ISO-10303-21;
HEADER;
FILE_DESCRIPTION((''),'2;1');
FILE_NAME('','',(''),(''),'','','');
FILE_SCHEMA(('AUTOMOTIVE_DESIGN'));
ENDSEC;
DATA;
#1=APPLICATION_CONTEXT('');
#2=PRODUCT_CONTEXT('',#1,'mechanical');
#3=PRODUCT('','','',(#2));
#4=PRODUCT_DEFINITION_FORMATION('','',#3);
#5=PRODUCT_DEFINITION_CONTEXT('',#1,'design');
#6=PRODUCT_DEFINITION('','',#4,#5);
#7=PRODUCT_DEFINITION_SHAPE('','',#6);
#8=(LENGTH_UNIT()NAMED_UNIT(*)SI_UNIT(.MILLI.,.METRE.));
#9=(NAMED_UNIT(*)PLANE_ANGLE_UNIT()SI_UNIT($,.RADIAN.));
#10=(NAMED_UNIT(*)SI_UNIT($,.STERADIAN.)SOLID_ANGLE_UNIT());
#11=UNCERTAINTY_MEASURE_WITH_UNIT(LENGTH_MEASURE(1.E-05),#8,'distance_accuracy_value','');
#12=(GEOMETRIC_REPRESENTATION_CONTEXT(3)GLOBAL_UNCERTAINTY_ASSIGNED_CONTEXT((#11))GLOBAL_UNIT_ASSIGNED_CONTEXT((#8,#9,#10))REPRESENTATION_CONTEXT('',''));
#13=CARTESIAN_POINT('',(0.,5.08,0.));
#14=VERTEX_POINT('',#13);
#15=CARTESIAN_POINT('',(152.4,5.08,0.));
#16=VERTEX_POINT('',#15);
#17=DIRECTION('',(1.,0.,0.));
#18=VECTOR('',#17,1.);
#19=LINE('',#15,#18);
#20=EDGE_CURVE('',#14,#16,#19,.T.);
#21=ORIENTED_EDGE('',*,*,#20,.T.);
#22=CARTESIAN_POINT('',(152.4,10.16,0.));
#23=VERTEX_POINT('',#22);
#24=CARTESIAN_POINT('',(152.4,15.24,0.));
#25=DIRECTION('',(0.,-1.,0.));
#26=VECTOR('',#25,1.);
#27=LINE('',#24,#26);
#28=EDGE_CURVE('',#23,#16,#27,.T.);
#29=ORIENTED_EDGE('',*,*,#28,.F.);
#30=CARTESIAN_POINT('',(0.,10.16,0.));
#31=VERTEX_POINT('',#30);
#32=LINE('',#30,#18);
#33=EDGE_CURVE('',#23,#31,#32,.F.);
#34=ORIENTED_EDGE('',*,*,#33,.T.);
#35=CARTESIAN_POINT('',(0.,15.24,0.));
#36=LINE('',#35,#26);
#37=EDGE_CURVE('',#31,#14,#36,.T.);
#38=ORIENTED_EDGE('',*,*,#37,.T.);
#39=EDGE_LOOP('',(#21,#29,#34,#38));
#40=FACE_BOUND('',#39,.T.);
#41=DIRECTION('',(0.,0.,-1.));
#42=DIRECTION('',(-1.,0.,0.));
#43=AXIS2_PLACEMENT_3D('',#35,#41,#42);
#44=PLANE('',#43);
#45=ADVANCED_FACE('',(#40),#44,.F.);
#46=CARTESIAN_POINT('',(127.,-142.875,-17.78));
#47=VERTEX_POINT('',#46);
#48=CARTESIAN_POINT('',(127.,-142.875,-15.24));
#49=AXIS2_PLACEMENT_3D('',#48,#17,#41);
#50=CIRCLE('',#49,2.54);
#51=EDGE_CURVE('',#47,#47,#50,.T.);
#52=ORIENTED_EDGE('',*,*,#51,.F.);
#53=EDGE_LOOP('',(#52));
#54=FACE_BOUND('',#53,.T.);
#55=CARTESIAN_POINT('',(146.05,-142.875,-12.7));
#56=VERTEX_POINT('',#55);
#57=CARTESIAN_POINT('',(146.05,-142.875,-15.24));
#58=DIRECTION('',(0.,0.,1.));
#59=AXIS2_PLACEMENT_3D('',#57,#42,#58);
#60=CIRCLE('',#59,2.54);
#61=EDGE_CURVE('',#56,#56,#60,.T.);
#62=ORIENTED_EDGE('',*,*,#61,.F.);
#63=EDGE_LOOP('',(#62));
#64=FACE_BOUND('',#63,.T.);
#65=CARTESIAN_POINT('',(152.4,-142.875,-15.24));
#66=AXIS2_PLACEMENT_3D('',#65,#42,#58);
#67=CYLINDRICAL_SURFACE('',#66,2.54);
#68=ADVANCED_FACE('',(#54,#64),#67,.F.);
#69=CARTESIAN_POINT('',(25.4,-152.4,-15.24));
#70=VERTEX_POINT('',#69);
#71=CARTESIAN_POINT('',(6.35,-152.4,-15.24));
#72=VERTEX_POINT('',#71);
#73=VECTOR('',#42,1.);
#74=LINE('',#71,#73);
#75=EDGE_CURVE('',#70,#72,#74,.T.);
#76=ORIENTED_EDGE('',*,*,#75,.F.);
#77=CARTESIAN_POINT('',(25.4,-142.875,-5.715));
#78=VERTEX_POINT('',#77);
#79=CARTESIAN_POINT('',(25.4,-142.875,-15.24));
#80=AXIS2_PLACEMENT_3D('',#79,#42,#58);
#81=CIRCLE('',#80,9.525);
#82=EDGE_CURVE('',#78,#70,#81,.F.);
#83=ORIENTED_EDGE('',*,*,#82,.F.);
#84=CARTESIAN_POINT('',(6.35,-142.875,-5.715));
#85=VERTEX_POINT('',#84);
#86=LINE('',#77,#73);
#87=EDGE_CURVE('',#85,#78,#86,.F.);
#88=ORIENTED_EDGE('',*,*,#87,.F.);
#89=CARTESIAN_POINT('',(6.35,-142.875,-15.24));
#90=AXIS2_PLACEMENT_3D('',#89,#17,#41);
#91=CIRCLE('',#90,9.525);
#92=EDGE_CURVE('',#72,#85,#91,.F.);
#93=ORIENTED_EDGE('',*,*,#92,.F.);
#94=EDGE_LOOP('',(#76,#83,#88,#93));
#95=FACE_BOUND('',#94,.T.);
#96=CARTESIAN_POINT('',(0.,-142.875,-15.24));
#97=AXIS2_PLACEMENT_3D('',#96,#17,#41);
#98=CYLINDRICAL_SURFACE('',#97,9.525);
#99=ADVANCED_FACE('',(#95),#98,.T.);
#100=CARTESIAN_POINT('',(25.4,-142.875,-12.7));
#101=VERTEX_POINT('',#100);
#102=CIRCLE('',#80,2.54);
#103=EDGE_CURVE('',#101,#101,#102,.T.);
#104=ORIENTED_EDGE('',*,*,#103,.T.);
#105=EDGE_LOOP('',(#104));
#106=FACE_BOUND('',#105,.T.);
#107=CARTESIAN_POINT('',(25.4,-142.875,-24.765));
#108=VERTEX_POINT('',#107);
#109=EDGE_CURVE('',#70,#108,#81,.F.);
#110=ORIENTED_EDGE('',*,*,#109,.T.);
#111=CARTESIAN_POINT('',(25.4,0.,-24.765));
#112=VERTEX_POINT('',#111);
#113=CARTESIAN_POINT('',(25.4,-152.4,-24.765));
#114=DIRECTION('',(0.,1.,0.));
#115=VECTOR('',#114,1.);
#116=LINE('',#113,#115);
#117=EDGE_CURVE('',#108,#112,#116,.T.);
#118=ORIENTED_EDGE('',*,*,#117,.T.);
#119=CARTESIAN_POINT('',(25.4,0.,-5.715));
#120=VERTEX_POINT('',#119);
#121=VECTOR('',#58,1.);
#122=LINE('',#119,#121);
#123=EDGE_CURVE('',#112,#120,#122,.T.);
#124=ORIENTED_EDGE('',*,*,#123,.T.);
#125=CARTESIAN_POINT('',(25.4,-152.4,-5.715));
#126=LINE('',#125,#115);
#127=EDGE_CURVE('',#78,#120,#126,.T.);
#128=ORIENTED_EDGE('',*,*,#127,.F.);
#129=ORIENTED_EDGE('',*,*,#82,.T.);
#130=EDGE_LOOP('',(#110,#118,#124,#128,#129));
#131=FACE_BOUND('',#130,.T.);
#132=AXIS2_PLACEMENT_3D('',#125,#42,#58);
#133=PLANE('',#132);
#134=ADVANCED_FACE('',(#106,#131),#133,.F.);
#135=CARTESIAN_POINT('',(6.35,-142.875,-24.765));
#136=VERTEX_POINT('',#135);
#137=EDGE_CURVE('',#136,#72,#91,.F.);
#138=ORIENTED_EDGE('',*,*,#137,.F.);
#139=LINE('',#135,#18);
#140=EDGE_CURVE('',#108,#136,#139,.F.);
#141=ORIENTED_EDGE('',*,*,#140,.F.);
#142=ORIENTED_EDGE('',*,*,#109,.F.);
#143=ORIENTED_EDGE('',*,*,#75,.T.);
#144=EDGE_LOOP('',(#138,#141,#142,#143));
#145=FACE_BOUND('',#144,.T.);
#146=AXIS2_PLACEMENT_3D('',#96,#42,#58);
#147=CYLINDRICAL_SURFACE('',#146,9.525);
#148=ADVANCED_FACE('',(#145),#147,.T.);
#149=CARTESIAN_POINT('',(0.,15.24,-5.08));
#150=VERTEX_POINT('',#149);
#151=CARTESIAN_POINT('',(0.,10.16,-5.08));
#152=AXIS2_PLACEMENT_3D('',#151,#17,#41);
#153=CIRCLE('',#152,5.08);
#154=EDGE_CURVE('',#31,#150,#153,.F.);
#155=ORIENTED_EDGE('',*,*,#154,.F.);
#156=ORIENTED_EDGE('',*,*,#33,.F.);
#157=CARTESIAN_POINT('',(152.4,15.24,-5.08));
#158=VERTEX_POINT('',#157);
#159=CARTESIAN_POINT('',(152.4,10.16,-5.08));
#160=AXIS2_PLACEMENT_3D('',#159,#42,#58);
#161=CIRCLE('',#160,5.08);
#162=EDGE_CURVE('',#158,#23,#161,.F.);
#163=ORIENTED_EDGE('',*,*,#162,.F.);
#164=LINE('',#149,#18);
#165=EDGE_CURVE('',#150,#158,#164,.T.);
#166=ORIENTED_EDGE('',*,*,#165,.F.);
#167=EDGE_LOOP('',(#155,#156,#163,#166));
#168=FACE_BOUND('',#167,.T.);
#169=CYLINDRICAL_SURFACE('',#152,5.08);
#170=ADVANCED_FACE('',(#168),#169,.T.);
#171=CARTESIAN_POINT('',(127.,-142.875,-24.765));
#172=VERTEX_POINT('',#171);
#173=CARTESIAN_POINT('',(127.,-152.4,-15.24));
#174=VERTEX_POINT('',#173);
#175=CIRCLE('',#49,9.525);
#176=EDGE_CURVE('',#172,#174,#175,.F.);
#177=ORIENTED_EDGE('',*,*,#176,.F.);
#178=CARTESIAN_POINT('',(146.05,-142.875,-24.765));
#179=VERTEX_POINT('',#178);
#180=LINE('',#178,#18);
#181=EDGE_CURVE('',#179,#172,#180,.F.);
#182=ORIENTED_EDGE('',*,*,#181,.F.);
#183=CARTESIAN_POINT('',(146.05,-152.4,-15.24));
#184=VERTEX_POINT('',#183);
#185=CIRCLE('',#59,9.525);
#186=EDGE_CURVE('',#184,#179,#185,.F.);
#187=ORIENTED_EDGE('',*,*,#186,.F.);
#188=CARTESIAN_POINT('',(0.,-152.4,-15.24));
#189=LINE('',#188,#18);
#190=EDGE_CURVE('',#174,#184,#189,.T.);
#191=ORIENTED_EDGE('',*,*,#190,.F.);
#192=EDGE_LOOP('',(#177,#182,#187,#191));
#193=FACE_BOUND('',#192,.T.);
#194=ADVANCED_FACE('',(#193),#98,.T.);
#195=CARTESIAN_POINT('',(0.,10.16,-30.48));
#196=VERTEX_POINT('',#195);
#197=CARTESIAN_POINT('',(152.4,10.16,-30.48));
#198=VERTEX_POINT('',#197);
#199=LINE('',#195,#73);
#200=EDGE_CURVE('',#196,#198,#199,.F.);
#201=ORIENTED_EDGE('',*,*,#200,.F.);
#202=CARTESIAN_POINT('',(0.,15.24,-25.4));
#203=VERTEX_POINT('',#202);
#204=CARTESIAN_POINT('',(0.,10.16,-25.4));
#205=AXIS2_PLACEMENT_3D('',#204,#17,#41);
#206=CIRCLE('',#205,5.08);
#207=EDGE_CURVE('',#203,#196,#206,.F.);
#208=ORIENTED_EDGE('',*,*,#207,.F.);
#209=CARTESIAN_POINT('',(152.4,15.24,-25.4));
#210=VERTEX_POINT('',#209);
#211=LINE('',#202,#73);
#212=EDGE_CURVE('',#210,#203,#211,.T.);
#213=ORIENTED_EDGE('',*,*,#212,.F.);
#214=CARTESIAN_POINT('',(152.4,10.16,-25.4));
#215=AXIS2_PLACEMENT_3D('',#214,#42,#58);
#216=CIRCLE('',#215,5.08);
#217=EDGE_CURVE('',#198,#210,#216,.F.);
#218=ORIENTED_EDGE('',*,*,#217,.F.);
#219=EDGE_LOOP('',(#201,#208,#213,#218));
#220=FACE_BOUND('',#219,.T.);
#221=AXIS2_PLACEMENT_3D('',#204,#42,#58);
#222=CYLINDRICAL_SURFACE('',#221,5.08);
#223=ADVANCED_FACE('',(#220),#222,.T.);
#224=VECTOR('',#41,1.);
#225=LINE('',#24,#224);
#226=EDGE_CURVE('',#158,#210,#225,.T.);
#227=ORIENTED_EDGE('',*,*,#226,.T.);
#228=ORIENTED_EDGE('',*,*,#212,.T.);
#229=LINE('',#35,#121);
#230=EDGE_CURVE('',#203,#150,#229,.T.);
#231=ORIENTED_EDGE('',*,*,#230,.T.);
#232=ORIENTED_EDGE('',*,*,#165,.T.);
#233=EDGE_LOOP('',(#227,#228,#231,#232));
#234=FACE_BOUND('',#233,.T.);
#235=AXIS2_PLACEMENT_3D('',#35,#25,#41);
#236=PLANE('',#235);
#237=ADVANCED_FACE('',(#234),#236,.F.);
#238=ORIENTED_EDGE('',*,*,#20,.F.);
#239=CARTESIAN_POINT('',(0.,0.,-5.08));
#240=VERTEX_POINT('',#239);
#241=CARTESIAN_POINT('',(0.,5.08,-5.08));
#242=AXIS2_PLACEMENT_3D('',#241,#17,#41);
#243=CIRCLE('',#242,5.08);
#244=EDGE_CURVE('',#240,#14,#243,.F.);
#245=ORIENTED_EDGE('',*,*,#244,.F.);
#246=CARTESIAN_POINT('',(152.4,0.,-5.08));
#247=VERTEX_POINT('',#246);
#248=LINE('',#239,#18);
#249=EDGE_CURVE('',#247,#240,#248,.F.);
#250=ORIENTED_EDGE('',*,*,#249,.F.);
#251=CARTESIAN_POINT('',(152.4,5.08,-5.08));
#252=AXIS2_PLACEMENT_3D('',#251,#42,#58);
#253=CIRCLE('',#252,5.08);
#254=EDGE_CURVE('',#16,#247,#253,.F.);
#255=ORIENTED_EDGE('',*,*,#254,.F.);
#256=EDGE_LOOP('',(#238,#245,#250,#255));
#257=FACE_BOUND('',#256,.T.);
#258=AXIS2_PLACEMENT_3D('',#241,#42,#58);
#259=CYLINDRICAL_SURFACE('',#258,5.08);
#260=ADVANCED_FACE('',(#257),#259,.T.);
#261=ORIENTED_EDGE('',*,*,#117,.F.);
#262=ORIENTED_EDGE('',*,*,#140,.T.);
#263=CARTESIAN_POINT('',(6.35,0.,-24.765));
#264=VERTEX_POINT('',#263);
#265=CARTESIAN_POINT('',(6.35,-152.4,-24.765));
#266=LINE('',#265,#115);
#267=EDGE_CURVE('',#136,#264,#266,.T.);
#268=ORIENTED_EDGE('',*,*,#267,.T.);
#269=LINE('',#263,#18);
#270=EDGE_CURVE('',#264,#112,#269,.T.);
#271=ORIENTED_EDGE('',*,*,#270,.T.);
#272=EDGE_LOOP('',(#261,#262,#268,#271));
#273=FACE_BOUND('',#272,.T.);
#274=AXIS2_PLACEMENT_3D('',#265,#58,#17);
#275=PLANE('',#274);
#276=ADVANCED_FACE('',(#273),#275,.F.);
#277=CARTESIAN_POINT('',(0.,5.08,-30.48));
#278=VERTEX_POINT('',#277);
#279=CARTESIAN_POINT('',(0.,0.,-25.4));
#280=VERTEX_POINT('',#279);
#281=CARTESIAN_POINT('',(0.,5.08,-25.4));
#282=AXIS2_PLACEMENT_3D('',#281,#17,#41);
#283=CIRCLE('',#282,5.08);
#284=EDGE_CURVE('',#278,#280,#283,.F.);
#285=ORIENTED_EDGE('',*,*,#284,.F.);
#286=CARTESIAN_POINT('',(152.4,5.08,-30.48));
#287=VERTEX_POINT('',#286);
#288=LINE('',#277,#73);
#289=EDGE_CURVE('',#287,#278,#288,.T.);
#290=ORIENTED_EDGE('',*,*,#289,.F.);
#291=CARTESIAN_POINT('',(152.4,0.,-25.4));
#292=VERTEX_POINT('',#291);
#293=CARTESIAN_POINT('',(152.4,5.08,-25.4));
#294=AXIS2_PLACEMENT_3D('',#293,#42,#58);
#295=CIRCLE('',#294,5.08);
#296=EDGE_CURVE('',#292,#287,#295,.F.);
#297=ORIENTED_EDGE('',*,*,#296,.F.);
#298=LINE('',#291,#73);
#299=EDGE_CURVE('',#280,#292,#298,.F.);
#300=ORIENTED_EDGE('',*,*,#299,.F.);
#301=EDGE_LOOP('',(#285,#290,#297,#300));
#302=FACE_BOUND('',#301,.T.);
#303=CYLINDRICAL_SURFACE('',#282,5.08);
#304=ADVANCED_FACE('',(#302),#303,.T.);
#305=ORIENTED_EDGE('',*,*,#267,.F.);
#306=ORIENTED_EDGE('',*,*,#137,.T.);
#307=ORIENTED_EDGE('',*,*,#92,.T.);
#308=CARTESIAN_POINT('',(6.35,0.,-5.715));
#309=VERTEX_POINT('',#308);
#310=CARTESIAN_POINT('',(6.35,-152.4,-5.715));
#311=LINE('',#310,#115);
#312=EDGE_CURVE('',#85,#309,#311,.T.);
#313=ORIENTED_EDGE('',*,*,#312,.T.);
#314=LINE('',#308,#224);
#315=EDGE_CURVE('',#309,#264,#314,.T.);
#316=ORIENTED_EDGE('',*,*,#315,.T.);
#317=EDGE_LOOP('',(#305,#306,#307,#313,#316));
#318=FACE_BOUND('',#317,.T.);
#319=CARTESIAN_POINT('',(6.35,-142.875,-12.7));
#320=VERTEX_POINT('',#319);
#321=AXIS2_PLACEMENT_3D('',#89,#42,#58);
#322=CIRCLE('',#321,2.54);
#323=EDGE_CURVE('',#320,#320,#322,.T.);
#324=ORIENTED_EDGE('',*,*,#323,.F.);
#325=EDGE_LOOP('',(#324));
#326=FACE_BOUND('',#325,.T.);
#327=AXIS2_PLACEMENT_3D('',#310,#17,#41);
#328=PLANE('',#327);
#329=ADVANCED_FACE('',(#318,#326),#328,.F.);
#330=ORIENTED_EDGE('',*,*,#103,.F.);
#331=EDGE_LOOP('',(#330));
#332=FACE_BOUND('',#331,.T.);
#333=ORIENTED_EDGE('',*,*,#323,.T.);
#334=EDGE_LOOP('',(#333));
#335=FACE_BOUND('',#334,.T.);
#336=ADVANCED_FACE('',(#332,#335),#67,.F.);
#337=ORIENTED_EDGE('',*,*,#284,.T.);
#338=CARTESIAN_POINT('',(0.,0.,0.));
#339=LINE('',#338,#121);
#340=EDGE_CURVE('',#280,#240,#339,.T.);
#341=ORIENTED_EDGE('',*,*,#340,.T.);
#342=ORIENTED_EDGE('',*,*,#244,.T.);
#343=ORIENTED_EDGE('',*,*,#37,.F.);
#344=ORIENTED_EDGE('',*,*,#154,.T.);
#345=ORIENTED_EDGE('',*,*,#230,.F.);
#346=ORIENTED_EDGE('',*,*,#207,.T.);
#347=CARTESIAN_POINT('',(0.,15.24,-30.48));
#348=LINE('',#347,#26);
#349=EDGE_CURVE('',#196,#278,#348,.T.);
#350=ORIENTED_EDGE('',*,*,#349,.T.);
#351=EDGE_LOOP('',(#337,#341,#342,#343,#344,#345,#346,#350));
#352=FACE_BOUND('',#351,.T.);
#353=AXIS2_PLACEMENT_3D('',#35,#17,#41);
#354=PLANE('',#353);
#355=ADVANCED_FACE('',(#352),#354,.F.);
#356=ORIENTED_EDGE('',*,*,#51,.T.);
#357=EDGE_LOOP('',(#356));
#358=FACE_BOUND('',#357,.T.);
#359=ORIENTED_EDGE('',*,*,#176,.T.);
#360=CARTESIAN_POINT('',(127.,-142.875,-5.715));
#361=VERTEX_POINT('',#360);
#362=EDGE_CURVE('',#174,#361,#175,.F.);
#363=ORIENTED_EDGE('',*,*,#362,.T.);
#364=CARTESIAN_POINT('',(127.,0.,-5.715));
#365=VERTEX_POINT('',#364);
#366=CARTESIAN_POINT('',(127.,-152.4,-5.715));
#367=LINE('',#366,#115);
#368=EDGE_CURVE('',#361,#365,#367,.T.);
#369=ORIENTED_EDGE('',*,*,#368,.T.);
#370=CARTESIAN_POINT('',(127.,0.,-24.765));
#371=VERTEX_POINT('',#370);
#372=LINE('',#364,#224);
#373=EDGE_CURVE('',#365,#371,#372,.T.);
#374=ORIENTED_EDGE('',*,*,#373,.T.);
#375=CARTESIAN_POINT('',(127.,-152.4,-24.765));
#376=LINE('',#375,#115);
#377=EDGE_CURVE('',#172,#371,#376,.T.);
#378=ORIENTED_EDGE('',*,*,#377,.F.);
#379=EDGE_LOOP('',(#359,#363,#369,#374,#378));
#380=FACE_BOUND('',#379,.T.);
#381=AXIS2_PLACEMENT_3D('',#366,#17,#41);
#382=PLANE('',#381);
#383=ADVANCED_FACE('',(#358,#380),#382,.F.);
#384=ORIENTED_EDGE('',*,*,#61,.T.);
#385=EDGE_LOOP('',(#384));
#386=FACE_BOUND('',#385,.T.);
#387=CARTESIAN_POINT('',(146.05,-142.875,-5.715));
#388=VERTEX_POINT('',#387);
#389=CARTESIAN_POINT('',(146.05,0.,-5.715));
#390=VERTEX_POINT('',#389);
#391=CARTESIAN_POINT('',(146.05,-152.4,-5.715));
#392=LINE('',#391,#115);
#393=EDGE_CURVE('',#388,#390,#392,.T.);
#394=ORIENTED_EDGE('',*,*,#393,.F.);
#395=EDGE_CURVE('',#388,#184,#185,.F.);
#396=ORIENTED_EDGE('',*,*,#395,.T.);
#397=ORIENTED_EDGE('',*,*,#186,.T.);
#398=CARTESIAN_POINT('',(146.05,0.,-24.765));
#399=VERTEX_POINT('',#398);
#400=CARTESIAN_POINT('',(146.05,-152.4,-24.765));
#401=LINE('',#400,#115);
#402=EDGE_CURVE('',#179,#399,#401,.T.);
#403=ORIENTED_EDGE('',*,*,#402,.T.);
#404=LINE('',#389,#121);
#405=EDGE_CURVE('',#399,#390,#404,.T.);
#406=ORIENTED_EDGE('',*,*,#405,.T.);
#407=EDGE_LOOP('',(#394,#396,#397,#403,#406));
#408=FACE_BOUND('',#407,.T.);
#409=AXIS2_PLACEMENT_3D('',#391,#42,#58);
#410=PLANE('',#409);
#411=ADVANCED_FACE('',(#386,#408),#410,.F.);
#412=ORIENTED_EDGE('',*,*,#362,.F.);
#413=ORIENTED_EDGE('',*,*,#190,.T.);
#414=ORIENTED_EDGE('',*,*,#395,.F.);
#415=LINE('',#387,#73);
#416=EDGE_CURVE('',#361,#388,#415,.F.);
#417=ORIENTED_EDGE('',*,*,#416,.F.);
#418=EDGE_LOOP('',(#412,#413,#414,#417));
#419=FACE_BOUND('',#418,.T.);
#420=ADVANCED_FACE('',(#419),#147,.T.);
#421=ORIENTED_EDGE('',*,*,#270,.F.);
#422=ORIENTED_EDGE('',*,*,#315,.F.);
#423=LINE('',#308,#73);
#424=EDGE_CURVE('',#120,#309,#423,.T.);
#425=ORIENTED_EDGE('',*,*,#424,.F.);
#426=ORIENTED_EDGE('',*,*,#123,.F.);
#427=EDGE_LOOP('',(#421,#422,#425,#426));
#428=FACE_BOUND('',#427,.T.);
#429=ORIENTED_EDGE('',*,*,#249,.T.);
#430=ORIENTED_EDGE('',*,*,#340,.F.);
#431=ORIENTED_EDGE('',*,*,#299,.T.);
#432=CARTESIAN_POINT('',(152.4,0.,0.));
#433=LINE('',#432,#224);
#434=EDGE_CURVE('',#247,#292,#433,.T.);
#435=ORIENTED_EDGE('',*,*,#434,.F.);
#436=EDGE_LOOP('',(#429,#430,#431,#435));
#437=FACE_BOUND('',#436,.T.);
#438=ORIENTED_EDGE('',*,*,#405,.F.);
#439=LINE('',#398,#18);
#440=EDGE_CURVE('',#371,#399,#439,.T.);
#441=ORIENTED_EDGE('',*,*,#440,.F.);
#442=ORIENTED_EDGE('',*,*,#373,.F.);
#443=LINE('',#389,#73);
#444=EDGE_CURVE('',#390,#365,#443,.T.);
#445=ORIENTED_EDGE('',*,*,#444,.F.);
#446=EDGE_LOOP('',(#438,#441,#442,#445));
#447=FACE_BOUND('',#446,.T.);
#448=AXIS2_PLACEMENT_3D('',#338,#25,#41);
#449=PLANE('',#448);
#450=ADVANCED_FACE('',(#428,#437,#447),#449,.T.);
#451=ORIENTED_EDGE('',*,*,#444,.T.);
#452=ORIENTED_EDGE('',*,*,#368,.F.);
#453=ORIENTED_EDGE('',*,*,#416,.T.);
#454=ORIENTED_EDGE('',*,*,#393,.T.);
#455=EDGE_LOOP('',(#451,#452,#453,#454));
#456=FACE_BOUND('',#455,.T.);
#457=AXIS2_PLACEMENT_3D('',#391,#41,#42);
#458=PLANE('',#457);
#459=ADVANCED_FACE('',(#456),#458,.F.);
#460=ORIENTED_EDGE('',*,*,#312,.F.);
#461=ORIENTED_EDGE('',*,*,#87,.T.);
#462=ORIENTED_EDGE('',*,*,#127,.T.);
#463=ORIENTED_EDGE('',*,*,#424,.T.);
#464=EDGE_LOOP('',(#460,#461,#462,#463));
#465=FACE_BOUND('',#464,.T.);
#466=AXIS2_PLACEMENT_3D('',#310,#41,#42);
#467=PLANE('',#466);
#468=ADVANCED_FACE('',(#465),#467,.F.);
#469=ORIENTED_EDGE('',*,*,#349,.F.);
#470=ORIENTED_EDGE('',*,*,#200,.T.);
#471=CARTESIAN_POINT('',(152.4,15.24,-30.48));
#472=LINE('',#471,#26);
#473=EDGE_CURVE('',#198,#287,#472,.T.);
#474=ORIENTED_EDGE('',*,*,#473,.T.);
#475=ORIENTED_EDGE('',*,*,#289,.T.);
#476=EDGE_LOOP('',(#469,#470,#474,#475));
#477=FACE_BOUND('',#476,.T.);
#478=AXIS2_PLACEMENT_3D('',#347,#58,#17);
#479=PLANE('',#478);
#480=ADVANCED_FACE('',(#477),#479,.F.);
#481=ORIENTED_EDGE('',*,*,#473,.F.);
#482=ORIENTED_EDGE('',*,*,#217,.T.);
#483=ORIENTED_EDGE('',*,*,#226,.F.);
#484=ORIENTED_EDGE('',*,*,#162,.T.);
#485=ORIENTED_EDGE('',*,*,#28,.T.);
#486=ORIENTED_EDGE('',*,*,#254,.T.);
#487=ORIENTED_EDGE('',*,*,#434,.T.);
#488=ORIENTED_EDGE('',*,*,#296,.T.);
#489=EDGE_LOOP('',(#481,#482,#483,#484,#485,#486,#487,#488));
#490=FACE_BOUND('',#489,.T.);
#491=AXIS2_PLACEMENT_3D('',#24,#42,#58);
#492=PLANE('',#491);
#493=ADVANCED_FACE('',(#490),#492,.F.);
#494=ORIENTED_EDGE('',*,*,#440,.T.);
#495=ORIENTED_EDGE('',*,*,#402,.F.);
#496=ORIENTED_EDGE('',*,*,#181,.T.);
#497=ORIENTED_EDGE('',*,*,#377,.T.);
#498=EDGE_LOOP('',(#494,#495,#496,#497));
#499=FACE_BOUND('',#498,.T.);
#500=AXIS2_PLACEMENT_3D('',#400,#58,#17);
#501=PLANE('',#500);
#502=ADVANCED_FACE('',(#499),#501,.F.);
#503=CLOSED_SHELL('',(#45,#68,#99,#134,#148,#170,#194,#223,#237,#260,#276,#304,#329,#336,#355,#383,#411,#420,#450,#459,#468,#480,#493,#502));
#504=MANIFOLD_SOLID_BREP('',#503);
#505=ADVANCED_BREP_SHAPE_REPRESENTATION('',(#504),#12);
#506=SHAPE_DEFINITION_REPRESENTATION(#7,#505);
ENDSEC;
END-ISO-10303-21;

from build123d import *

# Parameters (mm, degrees)
SKETCH1_W           = 152.4
SKETCH1_H           = 30.48
BOSS_EXTRUDE1_DEPTH = 15.24
SKETCH2_W           = 19.05
SKETCH2_H           = 19.05
BOSS_EXTRUDE2_DEPTH = 152.4
SKETCH3_R           = 2.54
CUT_EXTRUDE1_DEPTH  = 214.273047758
FILLET1_R           = 9.525
FILLET2_R           = 9.525
FILLET3_R           = 9.525
FILLET4_R           = 9.525
FILLET5_R           = 5.08
FILLET6_R           = 5.08
FILLET7_R           = 5.08
FILLET8_R           = 5.08


with BuildPart() as part:
    # Sketch1 → Boss-Extrude1 (new body)
    with BuildSketch(Plane(origin=(0, 0, 0), x_dir=(1, 0, 0), z_dir=(0, 1, 0))):
        with Locations((76.2, 15.24)):
            Rectangle(SKETCH1_W, SKETCH1_H)
    extrude(amount=BOSS_EXTRUDE1_DEPTH)

    # Sketch2 → Boss-Extrude2 (add)
    with BuildSketch(Plane.XZ):
        with Locations((136.525, -15.24)):
            Rectangle(SKETCH2_W, SKETCH2_H)
        with Locations((15.875, -15.24)):
            Rectangle(SKETCH2_W, SKETCH2_H)
    extrude(amount=BOSS_EXTRUDE2_DEPTH)

    # Sketch3 → Cut-Extrude1 (cut, through all)
    with BuildSketch(Plane.ZY.offset(-6.35)):
        with Locations((-15.24, -142.875)):
            Circle(SKETCH3_R)
    extrude(amount=-CUT_EXTRUDE1_DEPTH, mode=Mode.SUBTRACT)

    # Fillet1
    fillet1_edges = [part.edges().sort_by_distance(p)[0] for p in [
        (15.875, -152.4, -5.715),
    ]]
    fillet(fillet1_edges, radius=FILLET1_R)

    # Fillet2
    fillet2_edges = [part.edges().sort_by_distance(p)[0] for p in [
        (15.875, -152.4, -24.765),
    ]]
    fillet(fillet2_edges, radius=FILLET2_R - 0.0001)  # a hair under: the kernel refuses the full size

    # Fillet3
    fillet3_edges = [part.edges().sort_by_distance(p)[0] for p in [
        (136.525, -152.4, -24.765),
    ]]
    fillet(fillet3_edges, radius=FILLET3_R)

    # Fillet4
    fillet4_edges = [part.edges().sort_by_distance(p)[0] for p in [
        (136.525, -152.4, -5.715),
    ]]
    fillet(fillet4_edges, radius=FILLET4_R - 0.0001)  # a hair under: the kernel refuses the full size

    # Fillet5
    fillet5_edges = [part.edges().sort_by_distance(p)[0] for p in [
        (76.2, 15.24, 0),
    ]]
    fillet(fillet5_edges, radius=FILLET5_R)

    # Fillet6
    fillet6_edges = [part.edges().sort_by_distance(p)[0] for p in [
        (76.2, 0, 0),
    ]]
    fillet(fillet6_edges, radius=FILLET6_R)

    # Fillet7
    fillet7_edges = [part.edges().sort_by_distance(p)[0] for p in [
        (76.2, 0, -30.48),
    ]]
    fillet(fillet7_edges, radius=FILLET7_R)

    # Fillet8
    fillet8_edges = [part.edges().sort_by_distance(p)[0] for p in [
        (76.2, 15.24, -30.48),
    ]]
    fillet(fillet8_edges, radius=FILLET8_R)


solid = part.part
